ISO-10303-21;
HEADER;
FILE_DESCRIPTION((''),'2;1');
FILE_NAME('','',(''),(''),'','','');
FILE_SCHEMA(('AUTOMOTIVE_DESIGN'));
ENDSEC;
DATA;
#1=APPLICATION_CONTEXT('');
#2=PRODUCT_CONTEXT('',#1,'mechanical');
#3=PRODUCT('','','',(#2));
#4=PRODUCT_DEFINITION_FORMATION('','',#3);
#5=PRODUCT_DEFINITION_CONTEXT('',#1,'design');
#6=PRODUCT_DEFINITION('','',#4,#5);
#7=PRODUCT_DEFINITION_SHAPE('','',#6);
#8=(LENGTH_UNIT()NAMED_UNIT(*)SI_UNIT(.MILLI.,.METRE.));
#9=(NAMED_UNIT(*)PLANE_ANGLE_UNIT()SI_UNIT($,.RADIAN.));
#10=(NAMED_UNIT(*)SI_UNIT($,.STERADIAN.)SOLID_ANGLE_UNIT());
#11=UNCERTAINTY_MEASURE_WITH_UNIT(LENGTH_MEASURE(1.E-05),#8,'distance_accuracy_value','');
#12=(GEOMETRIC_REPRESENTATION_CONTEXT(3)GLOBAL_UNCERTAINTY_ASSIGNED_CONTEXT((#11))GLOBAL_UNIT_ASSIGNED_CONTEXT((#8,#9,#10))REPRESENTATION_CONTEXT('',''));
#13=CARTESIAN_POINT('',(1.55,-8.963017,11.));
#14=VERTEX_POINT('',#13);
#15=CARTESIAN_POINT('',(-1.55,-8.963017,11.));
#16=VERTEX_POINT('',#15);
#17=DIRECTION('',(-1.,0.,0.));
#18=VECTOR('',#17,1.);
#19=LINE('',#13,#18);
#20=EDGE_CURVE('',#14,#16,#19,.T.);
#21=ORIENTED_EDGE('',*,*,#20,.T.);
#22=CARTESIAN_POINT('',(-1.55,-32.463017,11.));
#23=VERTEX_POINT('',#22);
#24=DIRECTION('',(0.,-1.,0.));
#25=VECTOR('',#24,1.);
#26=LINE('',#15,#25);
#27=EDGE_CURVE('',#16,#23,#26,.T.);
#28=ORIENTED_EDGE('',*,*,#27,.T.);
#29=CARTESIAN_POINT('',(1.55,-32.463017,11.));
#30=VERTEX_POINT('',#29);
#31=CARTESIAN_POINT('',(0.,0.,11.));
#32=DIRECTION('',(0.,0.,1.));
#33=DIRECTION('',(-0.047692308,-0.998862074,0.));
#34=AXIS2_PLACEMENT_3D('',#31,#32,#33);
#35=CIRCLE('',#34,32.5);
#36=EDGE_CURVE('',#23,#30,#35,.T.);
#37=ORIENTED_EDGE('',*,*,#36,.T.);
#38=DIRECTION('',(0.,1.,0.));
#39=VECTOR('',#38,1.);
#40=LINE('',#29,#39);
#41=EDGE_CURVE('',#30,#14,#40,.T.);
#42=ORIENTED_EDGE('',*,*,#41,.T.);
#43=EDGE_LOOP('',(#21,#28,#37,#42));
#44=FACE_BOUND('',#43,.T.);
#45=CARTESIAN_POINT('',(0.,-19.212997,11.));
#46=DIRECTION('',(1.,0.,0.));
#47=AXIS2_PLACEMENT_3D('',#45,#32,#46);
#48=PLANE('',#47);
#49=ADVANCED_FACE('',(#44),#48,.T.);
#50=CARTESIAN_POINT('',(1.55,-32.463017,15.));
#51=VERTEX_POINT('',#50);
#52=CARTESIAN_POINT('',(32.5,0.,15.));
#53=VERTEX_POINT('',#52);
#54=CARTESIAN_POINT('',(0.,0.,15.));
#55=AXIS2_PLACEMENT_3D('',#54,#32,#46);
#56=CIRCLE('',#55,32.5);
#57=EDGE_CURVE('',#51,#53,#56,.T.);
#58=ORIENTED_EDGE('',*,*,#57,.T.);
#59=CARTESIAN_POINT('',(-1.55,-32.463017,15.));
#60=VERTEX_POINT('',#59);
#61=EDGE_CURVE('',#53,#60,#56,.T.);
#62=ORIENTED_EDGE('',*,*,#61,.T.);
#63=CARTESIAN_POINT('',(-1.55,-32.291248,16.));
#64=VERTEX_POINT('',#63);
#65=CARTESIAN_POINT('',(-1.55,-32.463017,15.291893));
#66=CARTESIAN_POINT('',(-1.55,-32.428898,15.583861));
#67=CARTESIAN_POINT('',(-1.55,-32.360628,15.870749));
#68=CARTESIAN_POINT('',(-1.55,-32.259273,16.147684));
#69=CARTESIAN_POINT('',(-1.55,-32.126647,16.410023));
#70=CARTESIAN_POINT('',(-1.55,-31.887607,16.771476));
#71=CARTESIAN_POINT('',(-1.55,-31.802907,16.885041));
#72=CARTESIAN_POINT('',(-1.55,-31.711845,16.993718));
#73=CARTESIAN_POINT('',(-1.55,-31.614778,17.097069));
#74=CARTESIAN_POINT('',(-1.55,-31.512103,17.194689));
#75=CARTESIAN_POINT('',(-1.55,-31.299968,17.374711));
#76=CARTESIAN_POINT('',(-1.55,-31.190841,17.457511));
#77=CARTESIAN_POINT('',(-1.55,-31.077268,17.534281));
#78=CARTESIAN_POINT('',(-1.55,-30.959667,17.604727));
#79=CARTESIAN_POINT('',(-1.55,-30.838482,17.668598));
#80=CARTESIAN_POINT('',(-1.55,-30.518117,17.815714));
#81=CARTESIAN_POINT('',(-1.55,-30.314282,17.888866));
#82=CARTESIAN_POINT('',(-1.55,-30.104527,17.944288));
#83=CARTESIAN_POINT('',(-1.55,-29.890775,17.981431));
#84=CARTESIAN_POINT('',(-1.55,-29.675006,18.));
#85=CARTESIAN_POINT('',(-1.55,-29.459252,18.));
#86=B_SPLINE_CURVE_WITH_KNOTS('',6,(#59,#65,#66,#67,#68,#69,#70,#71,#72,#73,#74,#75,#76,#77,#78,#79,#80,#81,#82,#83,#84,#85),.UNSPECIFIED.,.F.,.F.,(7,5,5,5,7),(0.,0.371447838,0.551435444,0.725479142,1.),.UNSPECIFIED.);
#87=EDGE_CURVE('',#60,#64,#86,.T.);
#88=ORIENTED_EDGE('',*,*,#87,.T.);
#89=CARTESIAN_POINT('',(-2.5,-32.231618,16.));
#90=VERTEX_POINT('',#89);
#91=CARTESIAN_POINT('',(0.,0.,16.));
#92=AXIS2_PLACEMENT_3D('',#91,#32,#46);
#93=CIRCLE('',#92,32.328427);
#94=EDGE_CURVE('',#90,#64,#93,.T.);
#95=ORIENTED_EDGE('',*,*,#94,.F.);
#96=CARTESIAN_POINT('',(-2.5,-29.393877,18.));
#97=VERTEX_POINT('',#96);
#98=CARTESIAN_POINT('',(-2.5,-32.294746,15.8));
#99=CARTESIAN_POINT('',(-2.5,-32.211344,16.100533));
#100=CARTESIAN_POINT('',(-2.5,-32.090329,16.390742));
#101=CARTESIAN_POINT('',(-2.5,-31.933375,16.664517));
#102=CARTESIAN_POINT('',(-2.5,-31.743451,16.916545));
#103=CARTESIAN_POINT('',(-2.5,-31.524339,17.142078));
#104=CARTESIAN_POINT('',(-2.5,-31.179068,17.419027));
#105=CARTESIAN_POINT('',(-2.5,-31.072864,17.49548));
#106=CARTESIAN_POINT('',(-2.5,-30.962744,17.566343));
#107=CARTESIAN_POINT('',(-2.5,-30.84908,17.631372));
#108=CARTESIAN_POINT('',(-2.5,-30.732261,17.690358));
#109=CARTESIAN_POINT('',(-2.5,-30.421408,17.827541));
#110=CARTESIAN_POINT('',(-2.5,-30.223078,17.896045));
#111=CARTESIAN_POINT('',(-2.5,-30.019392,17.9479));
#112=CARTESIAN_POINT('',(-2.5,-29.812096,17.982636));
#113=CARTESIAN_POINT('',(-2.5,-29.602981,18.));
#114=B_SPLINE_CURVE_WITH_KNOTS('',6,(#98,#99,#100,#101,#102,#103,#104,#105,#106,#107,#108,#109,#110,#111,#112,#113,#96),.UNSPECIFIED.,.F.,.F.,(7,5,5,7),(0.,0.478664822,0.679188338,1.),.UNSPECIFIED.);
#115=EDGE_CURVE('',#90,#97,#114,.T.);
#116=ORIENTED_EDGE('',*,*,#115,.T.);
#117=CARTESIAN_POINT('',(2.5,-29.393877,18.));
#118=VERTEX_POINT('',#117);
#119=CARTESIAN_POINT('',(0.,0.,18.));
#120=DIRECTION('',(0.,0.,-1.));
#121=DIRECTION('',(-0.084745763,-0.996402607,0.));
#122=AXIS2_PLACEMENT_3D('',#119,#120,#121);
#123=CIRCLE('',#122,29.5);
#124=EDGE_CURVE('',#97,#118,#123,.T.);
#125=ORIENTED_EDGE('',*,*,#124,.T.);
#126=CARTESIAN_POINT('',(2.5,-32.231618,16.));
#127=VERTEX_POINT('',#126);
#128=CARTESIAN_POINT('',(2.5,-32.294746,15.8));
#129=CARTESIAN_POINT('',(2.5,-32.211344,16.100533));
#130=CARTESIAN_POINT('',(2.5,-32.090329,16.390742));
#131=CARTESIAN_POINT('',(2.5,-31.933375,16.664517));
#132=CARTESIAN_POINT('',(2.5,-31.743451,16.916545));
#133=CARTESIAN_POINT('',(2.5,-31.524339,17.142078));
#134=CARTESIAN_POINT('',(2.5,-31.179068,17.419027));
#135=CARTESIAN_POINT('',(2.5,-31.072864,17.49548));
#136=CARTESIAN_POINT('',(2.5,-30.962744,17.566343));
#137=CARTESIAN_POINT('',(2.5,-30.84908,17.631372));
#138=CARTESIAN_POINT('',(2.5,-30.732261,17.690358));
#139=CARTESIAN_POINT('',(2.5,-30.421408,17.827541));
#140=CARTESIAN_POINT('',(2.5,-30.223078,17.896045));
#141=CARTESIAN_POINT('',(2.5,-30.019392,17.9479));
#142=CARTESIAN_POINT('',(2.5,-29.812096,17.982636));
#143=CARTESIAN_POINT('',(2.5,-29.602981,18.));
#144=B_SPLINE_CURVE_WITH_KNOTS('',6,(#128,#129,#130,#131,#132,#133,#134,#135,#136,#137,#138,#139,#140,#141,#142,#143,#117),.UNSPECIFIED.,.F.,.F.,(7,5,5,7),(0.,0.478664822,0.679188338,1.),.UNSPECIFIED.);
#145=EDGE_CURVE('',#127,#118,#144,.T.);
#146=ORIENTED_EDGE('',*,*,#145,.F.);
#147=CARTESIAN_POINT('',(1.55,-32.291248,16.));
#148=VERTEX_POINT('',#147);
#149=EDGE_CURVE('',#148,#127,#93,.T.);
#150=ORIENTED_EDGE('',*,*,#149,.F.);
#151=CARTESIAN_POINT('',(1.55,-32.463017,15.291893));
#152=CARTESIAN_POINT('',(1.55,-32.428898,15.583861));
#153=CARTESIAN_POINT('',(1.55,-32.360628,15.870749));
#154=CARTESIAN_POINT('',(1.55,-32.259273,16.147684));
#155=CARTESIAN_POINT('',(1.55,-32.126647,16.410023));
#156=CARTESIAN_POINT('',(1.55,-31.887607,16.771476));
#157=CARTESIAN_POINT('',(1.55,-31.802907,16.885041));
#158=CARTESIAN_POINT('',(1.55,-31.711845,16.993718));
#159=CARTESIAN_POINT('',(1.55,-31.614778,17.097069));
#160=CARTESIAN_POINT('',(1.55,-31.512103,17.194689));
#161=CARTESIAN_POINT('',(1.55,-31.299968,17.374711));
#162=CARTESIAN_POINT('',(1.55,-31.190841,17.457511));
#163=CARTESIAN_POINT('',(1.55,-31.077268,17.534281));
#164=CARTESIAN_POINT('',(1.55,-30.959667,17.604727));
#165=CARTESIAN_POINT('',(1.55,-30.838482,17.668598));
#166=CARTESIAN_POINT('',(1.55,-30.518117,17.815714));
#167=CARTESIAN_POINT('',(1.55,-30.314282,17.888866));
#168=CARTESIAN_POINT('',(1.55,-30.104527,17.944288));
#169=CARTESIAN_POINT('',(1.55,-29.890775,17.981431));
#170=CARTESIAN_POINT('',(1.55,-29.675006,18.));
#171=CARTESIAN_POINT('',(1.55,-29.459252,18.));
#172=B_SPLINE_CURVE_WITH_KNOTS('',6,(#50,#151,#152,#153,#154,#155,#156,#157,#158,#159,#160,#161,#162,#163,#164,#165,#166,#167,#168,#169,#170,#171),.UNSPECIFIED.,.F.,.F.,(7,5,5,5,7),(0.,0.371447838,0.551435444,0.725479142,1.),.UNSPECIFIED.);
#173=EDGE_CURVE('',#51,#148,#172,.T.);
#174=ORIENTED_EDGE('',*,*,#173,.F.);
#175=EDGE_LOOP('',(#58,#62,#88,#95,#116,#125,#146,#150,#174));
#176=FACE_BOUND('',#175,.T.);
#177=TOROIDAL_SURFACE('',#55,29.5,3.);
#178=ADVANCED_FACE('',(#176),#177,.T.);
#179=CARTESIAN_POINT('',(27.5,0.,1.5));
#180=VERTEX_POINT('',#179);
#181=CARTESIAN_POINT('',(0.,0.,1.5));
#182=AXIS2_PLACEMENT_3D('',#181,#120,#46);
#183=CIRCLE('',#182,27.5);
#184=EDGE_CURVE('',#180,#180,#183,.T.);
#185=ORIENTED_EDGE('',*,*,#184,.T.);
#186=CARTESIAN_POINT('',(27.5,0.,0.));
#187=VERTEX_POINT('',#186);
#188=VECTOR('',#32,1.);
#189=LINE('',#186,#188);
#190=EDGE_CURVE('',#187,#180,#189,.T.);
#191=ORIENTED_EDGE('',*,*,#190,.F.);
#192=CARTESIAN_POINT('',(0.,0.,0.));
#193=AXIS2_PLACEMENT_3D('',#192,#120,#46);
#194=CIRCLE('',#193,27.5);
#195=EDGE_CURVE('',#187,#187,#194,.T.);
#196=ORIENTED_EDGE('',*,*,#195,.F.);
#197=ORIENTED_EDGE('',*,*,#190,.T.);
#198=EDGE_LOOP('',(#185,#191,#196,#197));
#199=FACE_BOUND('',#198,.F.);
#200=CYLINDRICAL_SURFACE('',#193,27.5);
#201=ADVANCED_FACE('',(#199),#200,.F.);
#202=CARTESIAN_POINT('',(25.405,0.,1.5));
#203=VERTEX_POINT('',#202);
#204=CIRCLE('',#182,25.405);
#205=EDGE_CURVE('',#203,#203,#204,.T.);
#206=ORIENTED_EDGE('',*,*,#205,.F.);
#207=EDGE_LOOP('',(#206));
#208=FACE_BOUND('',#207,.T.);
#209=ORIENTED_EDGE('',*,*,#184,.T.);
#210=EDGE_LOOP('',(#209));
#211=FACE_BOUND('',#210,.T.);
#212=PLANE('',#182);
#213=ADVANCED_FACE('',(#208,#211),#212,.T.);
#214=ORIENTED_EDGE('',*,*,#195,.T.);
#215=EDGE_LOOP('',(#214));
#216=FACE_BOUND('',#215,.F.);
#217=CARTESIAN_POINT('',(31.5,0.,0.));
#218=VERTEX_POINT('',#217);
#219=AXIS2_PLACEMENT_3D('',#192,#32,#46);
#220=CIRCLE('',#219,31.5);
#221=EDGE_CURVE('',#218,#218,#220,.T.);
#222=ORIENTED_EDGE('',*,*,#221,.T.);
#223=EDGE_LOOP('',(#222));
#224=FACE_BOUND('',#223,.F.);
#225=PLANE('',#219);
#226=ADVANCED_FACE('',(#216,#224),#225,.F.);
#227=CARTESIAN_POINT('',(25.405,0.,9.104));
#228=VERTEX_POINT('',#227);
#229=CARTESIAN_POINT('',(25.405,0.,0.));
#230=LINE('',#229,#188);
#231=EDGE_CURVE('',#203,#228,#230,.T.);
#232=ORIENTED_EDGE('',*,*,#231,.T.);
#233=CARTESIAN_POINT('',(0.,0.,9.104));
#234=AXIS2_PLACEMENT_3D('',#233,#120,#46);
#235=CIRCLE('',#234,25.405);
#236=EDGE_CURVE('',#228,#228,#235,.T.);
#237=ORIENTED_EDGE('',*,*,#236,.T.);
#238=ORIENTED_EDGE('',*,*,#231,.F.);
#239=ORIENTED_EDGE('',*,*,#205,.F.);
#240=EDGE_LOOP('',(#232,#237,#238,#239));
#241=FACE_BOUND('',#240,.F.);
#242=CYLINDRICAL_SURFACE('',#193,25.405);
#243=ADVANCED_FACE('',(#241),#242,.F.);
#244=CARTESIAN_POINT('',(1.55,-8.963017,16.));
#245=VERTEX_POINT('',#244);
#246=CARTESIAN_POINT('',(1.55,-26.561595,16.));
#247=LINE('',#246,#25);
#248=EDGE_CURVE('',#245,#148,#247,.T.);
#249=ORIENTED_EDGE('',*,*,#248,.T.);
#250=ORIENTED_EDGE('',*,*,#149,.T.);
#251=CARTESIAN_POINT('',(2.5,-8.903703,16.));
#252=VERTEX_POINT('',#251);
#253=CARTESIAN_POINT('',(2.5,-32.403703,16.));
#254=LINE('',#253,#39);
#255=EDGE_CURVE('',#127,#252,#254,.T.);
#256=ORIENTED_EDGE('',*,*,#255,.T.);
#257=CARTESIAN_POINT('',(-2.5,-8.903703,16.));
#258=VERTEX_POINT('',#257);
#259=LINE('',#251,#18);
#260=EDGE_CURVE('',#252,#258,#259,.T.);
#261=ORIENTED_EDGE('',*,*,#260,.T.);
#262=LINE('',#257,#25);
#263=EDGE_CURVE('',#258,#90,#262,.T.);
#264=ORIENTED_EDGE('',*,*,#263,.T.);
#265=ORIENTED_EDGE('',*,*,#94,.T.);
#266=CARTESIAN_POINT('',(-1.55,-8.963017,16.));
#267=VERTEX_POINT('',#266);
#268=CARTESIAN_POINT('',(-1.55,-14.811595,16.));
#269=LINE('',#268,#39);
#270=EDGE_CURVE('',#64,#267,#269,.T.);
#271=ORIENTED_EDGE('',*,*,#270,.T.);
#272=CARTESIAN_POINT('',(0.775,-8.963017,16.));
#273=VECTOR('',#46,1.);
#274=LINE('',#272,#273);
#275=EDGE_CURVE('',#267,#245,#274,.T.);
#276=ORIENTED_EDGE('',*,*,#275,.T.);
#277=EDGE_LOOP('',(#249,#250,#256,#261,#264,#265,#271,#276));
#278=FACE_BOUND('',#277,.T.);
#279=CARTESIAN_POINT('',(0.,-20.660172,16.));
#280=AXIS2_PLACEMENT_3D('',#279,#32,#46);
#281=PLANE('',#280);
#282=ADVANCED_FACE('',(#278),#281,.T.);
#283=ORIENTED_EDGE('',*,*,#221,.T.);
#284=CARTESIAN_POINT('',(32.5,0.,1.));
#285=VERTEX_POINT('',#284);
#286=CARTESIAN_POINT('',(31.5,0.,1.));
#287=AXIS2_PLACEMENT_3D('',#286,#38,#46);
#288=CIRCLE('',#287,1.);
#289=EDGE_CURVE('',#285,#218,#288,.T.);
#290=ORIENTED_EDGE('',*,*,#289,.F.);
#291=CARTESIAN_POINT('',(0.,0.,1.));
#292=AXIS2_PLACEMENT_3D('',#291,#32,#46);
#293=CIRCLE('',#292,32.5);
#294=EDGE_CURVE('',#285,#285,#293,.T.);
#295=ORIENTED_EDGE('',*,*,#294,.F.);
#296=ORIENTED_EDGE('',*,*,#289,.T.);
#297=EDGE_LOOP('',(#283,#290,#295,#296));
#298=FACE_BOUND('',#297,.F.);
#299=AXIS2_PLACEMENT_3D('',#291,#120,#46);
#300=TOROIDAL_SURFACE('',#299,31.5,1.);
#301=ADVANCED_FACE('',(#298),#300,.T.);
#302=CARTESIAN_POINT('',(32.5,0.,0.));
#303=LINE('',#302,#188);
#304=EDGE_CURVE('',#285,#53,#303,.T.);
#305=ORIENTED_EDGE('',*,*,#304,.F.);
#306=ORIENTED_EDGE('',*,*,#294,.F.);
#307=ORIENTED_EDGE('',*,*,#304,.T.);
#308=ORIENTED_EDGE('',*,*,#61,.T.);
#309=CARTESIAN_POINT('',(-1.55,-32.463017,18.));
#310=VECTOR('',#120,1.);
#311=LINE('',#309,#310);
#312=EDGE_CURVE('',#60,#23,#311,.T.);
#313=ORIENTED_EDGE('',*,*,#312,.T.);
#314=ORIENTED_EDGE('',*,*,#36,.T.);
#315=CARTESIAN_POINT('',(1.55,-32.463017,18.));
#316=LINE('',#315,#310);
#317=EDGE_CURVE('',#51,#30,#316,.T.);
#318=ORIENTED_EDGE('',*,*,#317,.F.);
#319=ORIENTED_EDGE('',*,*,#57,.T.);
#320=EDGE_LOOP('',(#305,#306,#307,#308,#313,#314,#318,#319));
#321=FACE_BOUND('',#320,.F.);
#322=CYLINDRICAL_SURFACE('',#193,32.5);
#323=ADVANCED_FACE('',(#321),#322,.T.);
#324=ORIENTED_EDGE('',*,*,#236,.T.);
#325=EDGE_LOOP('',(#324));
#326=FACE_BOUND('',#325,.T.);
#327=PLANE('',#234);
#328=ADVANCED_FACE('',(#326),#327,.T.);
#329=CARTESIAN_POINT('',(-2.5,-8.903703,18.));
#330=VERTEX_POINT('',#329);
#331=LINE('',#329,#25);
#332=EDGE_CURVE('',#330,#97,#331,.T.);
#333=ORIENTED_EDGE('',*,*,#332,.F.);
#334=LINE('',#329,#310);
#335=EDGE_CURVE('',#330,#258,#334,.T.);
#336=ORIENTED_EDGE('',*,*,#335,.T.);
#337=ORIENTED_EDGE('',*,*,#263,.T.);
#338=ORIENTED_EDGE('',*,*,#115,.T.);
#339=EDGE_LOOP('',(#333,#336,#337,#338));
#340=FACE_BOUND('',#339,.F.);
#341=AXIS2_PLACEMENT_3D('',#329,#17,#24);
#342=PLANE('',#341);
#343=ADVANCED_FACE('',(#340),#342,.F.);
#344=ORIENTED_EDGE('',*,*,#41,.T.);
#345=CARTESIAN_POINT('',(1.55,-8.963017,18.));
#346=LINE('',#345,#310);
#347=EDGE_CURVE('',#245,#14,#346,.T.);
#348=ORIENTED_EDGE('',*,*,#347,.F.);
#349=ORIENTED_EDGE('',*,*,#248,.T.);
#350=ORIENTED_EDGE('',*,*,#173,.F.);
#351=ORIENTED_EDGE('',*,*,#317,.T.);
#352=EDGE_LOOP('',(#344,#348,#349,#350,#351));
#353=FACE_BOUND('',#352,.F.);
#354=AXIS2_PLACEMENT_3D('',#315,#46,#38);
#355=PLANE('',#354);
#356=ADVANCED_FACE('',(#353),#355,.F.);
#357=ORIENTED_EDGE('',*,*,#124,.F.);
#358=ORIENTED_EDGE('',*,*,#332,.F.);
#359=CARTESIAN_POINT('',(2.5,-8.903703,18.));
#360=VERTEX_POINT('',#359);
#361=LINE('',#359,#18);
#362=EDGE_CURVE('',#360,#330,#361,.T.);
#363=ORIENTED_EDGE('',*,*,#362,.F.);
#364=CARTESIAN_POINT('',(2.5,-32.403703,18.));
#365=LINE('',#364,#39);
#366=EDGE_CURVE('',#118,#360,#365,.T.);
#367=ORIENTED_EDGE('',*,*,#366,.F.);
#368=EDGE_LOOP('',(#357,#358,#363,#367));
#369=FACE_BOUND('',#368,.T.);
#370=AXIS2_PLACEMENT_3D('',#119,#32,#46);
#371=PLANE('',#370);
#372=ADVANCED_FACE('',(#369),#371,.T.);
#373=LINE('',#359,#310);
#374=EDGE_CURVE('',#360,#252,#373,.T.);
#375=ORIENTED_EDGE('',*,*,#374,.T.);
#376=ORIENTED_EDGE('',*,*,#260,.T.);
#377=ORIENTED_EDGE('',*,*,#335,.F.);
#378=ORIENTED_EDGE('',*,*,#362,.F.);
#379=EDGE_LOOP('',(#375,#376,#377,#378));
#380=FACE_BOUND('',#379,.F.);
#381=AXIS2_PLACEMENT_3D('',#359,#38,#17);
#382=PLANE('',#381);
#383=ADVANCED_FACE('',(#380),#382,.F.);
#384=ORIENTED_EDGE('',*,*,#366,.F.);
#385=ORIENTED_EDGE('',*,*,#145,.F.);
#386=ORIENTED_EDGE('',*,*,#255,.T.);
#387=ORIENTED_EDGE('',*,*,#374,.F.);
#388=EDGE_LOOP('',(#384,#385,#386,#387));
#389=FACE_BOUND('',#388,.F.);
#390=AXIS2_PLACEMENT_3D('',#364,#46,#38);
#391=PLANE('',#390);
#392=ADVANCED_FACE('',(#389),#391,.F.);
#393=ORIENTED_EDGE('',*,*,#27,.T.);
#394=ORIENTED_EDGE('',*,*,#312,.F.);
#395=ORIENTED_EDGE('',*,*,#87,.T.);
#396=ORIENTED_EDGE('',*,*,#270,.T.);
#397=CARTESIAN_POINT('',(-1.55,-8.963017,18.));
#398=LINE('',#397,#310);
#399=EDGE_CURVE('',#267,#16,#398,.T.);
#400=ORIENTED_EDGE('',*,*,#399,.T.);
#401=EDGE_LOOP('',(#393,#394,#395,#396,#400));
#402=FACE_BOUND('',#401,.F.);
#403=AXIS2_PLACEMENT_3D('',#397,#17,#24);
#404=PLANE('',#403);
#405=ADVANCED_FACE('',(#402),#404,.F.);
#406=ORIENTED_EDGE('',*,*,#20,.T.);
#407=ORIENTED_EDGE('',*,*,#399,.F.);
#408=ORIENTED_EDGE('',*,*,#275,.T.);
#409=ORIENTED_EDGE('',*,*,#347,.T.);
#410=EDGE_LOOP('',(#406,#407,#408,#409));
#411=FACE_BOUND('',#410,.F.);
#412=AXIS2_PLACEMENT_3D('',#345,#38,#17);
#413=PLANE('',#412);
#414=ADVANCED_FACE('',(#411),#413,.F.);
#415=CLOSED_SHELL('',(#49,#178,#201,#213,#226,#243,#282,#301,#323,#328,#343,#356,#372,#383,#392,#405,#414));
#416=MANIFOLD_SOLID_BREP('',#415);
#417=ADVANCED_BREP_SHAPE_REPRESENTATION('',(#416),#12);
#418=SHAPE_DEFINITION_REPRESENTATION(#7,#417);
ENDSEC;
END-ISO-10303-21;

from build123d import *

# Parameters (mm, degrees)
F0_R      = 32.5
F1_DEPTH  = 18
F2_R      = 3
F3_R      = 1
F4_R      = 25.405
F5_DEPTH  = 9.104
F6_R      = 27.5
F6_R_2    = 25.405
F7_DEPTH  = 1.5
F9_DEPTH  = 7
F11_DEPTH = 2


# Not quite as in the source:
# - the program builds the solid bodies; features that only make, move or delete a surface that nothing else refers to are left out


with BuildPart() as f1:
    # F0 (on Top) → F1 (new body)
    with BuildSketch(Plane.XY):
        Circle(F0_R)
    extrude(amount=F1_DEPTH)

    # F2
    f2_edges = [f1.edges().sort_by_distance(p)[0] for p in [
        (-32.5, 0, 18),
    ]]
    fillet(f2_edges, radius=F2_R)

    # F3
    f3_edges = [f1.edges().sort_by_distance(p)[0] for p in [
        (-32.5, 0, 0),
    ]]
    fillet(f3_edges, radius=F3_R)

    # F4 (on face) → F5 (cut)
    with BuildSketch(Plane(origin=(0, 0, 0), x_dir=(1, 0, 0), z_dir=(0, 0, -1))):
        Circle(F4_R)
    extrude(amount=-F5_DEPTH, mode=Mode.SUBTRACT)

    # F6 (on face) → F7 (cut)
    with BuildSketch(Plane(origin=(0, 0, 0), x_dir=(1, 0, 0), z_dir=(0, 0, -1))):
        Circle(F6_R)
        Circle(F6_R_2, mode=Mode.SUBTRACT)
    extrude(amount=-F7_DEPTH, mode=Mode.SUBTRACT)

    # F8 (on face) → F9 (cut)
    with BuildSketch(Plane.XY.offset(18)):
        with BuildLine():
            Line((1.55, -8.9630174198), (0, -8.9630174198))
            Line((0, -8.9630174198), (-1.55, -8.9630174198))
            Line((-1.55, -8.9630174198), (-1.55, -29.459251518))
            ThreePointArc((-1.55, -29.459251518), (0, -29.5), (1.55, -29.459251518))
            Line((1.55, -29.459251518), (1.55, -8.9630174198))
        make_face()
        with BuildLine():
            Line((1.55, -32.4630174198), (1.55, -29.459251518))
            ThreePointArc((1.55, -29.459251518), (0, -29.5), (-1.55, -29.459251518))
            Line((-1.55, -29.459251518), (-1.55, -32.4630174198))
            ThreePointArc((-1.55, -32.4630174198), (0, -32.5), (1.55, -32.4630174198))
        make_face()
    extrude(amount=-F9_DEPTH, mode=Mode.SUBTRACT)

    # F10 (on face) → F11 (cut)
    with BuildSketch(Plane.XY.offset(18)):
        with BuildLine():
            ThreePointArc((-2.5, -32.403703492), (-2.0252171576, -32.4368385553), (-1.55, -32.4630174198))
            ThreePointArc((-1.55, -32.4630174198), (0, -32.5), (1.55, -32.4630174198))
            ThreePointArc((1.55, -32.4630174198), (2.0252171576, -32.4368385553), (2.5, -32.403703492))
            Line((2.5, -32.403703492), (2.5, -8.903703492))
            Line((2.5, -8.903703492), (-2.5, -8.903703492))
            Line((-2.5, -8.903703492), (-2.5, -32.403703492))
        make_face()
    extrude(amount=-F11_DEPTH, mode=Mode.SUBTRACT)


solid = f1.part
